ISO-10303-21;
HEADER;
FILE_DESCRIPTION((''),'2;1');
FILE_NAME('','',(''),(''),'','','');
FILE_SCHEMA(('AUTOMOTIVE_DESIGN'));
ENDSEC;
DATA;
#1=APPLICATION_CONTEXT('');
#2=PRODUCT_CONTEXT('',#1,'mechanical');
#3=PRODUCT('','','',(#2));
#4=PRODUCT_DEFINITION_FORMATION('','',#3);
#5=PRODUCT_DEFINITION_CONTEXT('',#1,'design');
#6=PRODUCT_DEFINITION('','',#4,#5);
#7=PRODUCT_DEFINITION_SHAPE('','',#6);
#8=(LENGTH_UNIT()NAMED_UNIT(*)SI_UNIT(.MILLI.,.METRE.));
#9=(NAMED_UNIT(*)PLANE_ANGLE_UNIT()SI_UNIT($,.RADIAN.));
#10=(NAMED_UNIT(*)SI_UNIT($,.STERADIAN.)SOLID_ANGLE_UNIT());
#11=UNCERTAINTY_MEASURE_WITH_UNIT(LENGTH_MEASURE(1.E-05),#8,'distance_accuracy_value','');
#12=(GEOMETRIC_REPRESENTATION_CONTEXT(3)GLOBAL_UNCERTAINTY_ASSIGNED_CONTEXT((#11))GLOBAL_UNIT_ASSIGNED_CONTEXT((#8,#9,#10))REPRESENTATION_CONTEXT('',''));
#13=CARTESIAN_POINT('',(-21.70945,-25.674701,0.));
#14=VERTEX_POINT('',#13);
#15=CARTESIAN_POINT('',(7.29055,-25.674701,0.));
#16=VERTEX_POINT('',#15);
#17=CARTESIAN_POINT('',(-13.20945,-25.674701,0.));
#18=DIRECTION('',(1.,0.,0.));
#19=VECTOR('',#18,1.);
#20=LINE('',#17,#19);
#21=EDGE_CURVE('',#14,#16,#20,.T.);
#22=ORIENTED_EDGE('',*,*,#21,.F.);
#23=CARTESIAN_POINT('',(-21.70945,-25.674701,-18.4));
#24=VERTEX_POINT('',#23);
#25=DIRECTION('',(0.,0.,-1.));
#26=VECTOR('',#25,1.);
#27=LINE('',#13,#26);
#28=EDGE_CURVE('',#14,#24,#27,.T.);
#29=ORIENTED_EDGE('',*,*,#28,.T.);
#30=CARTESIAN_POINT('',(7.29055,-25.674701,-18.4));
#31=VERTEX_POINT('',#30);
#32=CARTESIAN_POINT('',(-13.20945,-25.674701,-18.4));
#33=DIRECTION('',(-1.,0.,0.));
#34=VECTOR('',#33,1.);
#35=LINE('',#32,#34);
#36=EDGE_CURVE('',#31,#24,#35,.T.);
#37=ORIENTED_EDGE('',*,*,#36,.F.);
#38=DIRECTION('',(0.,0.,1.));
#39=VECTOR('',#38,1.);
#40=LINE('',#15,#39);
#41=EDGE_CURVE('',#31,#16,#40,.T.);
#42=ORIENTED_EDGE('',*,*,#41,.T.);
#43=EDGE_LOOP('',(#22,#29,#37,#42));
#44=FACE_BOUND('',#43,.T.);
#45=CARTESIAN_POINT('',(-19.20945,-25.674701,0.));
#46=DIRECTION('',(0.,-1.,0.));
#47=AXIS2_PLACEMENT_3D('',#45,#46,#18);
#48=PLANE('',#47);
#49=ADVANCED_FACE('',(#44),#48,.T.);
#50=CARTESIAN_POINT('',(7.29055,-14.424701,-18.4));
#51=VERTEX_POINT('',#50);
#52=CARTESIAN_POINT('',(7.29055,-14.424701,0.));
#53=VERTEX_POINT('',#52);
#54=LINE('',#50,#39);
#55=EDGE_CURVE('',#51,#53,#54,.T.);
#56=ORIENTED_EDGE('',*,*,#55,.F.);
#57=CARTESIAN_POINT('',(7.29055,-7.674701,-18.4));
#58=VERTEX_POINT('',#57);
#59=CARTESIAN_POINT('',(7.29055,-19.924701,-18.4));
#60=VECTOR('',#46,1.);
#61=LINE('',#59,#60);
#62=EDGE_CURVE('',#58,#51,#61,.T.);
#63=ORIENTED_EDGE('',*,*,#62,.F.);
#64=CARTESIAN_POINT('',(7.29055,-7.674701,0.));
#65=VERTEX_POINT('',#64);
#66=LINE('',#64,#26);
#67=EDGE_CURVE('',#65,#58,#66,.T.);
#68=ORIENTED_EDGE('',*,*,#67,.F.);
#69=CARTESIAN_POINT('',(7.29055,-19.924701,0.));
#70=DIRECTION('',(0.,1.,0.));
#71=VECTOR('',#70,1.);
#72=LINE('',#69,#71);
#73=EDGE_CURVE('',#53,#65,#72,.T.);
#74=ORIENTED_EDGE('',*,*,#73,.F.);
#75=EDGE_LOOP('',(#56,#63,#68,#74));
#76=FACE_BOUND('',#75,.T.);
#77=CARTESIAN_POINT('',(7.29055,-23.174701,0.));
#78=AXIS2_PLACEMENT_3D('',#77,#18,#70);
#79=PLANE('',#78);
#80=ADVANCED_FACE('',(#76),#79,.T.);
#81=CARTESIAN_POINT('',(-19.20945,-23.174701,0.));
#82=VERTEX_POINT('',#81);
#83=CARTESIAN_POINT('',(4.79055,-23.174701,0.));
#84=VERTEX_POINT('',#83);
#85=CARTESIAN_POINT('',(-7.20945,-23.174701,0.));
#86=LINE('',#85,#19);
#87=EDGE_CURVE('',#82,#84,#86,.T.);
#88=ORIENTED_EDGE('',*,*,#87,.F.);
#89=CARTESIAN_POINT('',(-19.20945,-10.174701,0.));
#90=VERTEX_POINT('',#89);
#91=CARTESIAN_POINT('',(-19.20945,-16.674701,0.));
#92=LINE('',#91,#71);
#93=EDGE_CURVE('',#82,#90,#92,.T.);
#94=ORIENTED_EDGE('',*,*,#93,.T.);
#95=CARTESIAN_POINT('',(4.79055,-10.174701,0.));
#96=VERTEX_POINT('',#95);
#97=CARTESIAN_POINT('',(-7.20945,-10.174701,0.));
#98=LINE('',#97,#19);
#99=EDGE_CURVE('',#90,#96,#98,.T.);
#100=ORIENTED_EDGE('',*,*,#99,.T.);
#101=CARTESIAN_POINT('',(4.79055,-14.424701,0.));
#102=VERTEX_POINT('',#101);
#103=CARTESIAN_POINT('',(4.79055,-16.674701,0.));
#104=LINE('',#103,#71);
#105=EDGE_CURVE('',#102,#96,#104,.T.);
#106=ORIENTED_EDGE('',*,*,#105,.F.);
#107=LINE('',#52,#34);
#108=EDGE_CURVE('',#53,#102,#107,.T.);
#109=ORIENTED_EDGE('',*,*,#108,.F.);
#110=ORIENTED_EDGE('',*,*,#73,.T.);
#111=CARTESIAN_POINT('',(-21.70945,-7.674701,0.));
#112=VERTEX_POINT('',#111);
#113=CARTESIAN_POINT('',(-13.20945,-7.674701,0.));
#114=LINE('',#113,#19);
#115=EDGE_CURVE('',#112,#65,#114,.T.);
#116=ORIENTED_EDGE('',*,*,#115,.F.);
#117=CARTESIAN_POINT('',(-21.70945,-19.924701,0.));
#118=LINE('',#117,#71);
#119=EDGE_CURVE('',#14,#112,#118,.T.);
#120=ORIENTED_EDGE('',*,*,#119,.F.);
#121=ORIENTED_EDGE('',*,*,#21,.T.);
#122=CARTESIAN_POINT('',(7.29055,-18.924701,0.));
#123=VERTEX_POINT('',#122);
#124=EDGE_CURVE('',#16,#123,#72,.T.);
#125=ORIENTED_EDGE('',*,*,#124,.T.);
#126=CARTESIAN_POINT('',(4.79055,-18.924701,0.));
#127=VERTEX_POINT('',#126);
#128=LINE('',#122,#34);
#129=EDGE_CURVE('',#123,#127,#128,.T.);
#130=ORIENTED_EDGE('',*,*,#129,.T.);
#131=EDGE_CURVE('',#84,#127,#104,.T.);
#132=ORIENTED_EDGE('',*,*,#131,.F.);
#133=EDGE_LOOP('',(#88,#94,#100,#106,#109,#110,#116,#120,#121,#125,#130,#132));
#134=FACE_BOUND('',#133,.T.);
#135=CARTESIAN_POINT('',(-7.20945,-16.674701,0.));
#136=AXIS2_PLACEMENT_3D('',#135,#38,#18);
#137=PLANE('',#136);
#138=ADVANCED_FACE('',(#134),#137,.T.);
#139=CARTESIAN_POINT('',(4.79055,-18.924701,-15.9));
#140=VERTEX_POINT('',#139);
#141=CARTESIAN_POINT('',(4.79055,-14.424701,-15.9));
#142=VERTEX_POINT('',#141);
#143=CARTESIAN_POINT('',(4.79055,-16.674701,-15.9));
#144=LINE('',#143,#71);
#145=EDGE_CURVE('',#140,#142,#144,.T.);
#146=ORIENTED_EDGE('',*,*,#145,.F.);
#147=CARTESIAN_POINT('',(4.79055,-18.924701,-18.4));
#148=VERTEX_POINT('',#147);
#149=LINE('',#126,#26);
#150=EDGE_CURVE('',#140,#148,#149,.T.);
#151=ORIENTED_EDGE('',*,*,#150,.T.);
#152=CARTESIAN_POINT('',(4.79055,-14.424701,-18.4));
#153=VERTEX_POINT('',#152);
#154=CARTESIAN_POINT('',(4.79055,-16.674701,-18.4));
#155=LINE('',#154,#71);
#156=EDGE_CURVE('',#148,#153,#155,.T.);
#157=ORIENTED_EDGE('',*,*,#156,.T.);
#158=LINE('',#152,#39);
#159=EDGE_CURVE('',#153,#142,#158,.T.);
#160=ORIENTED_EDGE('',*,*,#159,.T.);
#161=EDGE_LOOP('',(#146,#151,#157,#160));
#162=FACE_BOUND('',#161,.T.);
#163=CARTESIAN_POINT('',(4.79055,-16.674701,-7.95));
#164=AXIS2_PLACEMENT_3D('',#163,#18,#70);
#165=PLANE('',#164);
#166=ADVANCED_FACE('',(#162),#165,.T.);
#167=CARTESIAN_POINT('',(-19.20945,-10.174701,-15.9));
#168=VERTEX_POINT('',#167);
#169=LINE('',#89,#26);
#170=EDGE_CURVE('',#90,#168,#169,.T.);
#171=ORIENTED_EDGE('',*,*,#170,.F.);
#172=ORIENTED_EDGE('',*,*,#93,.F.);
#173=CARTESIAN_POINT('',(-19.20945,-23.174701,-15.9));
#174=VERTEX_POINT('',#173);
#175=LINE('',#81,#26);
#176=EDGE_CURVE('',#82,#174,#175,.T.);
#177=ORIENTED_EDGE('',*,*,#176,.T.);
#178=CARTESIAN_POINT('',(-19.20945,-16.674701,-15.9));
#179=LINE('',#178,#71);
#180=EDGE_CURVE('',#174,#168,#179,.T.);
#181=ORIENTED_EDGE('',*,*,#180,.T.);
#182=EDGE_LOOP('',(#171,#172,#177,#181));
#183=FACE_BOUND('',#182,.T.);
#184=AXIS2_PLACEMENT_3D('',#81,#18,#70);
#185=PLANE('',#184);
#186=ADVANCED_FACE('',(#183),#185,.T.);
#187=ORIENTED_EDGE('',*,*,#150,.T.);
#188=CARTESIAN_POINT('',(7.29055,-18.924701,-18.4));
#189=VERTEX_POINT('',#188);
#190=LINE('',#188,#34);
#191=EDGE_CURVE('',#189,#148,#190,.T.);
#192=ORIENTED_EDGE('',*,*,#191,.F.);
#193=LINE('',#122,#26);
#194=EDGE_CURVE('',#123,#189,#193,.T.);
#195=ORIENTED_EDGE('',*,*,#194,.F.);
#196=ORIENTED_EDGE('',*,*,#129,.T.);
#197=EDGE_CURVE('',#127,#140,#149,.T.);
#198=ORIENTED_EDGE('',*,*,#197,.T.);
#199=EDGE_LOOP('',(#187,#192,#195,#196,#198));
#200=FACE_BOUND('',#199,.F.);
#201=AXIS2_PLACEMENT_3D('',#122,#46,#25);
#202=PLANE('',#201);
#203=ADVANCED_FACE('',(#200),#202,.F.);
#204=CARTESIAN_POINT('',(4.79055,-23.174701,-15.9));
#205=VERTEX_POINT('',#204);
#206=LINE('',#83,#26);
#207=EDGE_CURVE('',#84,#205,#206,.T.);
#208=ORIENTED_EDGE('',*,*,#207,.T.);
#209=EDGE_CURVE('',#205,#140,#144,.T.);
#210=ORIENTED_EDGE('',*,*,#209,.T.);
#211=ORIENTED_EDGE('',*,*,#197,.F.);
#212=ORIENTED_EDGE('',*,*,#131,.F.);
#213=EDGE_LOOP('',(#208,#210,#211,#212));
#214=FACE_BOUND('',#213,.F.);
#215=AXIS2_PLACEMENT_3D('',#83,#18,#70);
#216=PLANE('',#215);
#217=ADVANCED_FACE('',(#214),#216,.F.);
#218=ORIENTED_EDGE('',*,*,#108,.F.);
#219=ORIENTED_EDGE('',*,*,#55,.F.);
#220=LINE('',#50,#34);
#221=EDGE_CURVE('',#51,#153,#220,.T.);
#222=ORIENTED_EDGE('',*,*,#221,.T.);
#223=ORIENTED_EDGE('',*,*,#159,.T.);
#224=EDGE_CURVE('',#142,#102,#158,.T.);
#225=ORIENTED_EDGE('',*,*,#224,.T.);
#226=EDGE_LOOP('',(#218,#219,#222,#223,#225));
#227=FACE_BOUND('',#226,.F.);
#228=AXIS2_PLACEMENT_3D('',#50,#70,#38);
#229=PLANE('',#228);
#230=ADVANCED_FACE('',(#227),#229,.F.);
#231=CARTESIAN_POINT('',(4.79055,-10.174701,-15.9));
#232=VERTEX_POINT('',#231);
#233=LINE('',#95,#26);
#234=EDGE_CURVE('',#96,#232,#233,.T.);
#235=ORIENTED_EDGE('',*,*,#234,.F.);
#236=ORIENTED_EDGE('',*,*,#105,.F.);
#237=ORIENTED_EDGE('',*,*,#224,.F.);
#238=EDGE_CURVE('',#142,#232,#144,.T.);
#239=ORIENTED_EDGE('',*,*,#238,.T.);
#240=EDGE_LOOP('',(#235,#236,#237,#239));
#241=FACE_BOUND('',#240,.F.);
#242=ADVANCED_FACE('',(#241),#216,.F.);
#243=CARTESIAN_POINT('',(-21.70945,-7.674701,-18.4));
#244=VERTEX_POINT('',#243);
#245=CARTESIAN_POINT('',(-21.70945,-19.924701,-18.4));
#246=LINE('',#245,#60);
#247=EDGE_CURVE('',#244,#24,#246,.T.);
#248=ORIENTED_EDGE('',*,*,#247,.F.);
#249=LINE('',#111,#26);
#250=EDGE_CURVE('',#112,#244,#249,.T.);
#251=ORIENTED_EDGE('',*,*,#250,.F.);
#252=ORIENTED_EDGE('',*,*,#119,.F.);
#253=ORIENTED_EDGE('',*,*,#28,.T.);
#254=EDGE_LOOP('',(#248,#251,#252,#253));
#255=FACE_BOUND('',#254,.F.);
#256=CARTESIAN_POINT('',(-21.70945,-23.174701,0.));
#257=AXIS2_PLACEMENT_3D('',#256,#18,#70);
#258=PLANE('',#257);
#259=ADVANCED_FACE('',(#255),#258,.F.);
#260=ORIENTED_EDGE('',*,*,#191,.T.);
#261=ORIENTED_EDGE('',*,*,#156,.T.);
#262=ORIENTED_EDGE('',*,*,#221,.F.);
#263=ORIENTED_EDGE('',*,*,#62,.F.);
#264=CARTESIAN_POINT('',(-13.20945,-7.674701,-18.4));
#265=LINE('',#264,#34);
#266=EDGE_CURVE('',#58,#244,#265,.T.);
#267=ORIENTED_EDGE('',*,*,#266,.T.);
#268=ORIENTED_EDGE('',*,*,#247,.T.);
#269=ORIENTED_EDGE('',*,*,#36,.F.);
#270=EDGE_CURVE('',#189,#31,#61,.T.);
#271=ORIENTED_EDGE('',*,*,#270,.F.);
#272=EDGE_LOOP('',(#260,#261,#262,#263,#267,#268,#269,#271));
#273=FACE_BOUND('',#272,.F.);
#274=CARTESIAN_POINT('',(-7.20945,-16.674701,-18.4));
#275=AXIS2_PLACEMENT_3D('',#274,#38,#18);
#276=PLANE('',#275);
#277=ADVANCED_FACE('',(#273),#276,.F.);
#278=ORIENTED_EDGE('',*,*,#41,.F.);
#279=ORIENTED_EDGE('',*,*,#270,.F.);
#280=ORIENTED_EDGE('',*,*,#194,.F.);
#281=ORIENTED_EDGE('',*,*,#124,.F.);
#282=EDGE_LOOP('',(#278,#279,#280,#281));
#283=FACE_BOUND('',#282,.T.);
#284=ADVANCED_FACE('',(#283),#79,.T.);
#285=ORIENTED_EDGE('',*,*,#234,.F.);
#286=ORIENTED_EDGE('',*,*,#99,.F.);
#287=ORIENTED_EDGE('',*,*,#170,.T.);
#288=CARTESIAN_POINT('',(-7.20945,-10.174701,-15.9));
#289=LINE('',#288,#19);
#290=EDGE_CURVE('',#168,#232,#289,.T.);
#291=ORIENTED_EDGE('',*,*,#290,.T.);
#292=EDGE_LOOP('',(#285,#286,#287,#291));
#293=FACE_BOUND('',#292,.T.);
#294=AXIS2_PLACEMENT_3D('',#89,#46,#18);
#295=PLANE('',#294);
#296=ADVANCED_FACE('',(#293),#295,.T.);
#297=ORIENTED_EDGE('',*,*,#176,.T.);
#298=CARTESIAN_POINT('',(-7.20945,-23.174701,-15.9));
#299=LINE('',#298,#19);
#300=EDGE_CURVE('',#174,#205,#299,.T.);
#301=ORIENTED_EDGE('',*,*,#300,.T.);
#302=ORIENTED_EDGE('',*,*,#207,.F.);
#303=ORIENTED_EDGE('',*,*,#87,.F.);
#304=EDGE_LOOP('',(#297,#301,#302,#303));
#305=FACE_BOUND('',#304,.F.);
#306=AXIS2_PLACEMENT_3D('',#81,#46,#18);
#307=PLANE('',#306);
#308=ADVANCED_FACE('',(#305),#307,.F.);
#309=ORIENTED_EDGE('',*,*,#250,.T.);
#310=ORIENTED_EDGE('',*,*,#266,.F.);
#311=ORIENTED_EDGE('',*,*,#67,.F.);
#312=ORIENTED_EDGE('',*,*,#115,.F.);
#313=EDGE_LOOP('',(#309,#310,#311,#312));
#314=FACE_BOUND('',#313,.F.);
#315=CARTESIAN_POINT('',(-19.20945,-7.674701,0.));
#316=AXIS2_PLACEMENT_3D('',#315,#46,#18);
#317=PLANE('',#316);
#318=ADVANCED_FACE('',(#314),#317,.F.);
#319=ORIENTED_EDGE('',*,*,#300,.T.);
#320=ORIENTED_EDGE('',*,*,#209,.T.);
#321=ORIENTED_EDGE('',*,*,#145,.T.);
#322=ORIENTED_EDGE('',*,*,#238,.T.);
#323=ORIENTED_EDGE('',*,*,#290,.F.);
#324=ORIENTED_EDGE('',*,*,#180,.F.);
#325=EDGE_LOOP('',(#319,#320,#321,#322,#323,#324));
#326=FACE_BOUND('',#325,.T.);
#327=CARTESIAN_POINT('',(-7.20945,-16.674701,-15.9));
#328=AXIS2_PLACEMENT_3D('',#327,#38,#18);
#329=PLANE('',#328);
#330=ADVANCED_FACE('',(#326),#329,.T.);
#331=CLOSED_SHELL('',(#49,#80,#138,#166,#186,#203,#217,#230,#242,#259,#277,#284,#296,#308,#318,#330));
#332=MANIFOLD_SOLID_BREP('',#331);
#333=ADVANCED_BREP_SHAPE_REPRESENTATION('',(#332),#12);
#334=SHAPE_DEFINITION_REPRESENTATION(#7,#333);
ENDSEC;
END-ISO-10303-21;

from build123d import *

# Parameters (mm, degrees)
F0_W     = 24
F0_H     = 13
F1_DEPTH = 15.9
F2_T     = 2.5
F3_W     = 4.5
F3_H     = 2.5
F4_DEPTH = 2.5


with BuildPart() as f1:
    # F0 (on Top) → F1 (new body)
    with BuildSketch(Plane.XY):
        with Locations((-7.2094501108, -16.6747012585)):
            Rectangle(F0_W, F0_H)
    extrude(amount=-F1_DEPTH)

    # F2
    f2_openings = [f1.faces().sort_by_distance(p)[0] for p in [
        (-7.20945, -16.674701, 0),
    ]]
    offset(amount=F2_T, openings=f2_openings, kind=Kind.INTERSECTION)

    # F3 (on face) → F4 (cut)
    with BuildSketch(Plane.YZ.offset(7.2905498892)):
        Polygon((-14.4247012585, 0), (-16.6747012585, 0), (-18.9247012585, 0), (-18.9247012585, -15.9), (-14.4247012585, -15.9), align=None)
        with Locations((-16.6747012585, -17.15)):
            Rectangle(F3_W, F3_H)
    extrude(amount=-F4_DEPTH, mode=Mode.SUBTRACT)


solid = f1.part
